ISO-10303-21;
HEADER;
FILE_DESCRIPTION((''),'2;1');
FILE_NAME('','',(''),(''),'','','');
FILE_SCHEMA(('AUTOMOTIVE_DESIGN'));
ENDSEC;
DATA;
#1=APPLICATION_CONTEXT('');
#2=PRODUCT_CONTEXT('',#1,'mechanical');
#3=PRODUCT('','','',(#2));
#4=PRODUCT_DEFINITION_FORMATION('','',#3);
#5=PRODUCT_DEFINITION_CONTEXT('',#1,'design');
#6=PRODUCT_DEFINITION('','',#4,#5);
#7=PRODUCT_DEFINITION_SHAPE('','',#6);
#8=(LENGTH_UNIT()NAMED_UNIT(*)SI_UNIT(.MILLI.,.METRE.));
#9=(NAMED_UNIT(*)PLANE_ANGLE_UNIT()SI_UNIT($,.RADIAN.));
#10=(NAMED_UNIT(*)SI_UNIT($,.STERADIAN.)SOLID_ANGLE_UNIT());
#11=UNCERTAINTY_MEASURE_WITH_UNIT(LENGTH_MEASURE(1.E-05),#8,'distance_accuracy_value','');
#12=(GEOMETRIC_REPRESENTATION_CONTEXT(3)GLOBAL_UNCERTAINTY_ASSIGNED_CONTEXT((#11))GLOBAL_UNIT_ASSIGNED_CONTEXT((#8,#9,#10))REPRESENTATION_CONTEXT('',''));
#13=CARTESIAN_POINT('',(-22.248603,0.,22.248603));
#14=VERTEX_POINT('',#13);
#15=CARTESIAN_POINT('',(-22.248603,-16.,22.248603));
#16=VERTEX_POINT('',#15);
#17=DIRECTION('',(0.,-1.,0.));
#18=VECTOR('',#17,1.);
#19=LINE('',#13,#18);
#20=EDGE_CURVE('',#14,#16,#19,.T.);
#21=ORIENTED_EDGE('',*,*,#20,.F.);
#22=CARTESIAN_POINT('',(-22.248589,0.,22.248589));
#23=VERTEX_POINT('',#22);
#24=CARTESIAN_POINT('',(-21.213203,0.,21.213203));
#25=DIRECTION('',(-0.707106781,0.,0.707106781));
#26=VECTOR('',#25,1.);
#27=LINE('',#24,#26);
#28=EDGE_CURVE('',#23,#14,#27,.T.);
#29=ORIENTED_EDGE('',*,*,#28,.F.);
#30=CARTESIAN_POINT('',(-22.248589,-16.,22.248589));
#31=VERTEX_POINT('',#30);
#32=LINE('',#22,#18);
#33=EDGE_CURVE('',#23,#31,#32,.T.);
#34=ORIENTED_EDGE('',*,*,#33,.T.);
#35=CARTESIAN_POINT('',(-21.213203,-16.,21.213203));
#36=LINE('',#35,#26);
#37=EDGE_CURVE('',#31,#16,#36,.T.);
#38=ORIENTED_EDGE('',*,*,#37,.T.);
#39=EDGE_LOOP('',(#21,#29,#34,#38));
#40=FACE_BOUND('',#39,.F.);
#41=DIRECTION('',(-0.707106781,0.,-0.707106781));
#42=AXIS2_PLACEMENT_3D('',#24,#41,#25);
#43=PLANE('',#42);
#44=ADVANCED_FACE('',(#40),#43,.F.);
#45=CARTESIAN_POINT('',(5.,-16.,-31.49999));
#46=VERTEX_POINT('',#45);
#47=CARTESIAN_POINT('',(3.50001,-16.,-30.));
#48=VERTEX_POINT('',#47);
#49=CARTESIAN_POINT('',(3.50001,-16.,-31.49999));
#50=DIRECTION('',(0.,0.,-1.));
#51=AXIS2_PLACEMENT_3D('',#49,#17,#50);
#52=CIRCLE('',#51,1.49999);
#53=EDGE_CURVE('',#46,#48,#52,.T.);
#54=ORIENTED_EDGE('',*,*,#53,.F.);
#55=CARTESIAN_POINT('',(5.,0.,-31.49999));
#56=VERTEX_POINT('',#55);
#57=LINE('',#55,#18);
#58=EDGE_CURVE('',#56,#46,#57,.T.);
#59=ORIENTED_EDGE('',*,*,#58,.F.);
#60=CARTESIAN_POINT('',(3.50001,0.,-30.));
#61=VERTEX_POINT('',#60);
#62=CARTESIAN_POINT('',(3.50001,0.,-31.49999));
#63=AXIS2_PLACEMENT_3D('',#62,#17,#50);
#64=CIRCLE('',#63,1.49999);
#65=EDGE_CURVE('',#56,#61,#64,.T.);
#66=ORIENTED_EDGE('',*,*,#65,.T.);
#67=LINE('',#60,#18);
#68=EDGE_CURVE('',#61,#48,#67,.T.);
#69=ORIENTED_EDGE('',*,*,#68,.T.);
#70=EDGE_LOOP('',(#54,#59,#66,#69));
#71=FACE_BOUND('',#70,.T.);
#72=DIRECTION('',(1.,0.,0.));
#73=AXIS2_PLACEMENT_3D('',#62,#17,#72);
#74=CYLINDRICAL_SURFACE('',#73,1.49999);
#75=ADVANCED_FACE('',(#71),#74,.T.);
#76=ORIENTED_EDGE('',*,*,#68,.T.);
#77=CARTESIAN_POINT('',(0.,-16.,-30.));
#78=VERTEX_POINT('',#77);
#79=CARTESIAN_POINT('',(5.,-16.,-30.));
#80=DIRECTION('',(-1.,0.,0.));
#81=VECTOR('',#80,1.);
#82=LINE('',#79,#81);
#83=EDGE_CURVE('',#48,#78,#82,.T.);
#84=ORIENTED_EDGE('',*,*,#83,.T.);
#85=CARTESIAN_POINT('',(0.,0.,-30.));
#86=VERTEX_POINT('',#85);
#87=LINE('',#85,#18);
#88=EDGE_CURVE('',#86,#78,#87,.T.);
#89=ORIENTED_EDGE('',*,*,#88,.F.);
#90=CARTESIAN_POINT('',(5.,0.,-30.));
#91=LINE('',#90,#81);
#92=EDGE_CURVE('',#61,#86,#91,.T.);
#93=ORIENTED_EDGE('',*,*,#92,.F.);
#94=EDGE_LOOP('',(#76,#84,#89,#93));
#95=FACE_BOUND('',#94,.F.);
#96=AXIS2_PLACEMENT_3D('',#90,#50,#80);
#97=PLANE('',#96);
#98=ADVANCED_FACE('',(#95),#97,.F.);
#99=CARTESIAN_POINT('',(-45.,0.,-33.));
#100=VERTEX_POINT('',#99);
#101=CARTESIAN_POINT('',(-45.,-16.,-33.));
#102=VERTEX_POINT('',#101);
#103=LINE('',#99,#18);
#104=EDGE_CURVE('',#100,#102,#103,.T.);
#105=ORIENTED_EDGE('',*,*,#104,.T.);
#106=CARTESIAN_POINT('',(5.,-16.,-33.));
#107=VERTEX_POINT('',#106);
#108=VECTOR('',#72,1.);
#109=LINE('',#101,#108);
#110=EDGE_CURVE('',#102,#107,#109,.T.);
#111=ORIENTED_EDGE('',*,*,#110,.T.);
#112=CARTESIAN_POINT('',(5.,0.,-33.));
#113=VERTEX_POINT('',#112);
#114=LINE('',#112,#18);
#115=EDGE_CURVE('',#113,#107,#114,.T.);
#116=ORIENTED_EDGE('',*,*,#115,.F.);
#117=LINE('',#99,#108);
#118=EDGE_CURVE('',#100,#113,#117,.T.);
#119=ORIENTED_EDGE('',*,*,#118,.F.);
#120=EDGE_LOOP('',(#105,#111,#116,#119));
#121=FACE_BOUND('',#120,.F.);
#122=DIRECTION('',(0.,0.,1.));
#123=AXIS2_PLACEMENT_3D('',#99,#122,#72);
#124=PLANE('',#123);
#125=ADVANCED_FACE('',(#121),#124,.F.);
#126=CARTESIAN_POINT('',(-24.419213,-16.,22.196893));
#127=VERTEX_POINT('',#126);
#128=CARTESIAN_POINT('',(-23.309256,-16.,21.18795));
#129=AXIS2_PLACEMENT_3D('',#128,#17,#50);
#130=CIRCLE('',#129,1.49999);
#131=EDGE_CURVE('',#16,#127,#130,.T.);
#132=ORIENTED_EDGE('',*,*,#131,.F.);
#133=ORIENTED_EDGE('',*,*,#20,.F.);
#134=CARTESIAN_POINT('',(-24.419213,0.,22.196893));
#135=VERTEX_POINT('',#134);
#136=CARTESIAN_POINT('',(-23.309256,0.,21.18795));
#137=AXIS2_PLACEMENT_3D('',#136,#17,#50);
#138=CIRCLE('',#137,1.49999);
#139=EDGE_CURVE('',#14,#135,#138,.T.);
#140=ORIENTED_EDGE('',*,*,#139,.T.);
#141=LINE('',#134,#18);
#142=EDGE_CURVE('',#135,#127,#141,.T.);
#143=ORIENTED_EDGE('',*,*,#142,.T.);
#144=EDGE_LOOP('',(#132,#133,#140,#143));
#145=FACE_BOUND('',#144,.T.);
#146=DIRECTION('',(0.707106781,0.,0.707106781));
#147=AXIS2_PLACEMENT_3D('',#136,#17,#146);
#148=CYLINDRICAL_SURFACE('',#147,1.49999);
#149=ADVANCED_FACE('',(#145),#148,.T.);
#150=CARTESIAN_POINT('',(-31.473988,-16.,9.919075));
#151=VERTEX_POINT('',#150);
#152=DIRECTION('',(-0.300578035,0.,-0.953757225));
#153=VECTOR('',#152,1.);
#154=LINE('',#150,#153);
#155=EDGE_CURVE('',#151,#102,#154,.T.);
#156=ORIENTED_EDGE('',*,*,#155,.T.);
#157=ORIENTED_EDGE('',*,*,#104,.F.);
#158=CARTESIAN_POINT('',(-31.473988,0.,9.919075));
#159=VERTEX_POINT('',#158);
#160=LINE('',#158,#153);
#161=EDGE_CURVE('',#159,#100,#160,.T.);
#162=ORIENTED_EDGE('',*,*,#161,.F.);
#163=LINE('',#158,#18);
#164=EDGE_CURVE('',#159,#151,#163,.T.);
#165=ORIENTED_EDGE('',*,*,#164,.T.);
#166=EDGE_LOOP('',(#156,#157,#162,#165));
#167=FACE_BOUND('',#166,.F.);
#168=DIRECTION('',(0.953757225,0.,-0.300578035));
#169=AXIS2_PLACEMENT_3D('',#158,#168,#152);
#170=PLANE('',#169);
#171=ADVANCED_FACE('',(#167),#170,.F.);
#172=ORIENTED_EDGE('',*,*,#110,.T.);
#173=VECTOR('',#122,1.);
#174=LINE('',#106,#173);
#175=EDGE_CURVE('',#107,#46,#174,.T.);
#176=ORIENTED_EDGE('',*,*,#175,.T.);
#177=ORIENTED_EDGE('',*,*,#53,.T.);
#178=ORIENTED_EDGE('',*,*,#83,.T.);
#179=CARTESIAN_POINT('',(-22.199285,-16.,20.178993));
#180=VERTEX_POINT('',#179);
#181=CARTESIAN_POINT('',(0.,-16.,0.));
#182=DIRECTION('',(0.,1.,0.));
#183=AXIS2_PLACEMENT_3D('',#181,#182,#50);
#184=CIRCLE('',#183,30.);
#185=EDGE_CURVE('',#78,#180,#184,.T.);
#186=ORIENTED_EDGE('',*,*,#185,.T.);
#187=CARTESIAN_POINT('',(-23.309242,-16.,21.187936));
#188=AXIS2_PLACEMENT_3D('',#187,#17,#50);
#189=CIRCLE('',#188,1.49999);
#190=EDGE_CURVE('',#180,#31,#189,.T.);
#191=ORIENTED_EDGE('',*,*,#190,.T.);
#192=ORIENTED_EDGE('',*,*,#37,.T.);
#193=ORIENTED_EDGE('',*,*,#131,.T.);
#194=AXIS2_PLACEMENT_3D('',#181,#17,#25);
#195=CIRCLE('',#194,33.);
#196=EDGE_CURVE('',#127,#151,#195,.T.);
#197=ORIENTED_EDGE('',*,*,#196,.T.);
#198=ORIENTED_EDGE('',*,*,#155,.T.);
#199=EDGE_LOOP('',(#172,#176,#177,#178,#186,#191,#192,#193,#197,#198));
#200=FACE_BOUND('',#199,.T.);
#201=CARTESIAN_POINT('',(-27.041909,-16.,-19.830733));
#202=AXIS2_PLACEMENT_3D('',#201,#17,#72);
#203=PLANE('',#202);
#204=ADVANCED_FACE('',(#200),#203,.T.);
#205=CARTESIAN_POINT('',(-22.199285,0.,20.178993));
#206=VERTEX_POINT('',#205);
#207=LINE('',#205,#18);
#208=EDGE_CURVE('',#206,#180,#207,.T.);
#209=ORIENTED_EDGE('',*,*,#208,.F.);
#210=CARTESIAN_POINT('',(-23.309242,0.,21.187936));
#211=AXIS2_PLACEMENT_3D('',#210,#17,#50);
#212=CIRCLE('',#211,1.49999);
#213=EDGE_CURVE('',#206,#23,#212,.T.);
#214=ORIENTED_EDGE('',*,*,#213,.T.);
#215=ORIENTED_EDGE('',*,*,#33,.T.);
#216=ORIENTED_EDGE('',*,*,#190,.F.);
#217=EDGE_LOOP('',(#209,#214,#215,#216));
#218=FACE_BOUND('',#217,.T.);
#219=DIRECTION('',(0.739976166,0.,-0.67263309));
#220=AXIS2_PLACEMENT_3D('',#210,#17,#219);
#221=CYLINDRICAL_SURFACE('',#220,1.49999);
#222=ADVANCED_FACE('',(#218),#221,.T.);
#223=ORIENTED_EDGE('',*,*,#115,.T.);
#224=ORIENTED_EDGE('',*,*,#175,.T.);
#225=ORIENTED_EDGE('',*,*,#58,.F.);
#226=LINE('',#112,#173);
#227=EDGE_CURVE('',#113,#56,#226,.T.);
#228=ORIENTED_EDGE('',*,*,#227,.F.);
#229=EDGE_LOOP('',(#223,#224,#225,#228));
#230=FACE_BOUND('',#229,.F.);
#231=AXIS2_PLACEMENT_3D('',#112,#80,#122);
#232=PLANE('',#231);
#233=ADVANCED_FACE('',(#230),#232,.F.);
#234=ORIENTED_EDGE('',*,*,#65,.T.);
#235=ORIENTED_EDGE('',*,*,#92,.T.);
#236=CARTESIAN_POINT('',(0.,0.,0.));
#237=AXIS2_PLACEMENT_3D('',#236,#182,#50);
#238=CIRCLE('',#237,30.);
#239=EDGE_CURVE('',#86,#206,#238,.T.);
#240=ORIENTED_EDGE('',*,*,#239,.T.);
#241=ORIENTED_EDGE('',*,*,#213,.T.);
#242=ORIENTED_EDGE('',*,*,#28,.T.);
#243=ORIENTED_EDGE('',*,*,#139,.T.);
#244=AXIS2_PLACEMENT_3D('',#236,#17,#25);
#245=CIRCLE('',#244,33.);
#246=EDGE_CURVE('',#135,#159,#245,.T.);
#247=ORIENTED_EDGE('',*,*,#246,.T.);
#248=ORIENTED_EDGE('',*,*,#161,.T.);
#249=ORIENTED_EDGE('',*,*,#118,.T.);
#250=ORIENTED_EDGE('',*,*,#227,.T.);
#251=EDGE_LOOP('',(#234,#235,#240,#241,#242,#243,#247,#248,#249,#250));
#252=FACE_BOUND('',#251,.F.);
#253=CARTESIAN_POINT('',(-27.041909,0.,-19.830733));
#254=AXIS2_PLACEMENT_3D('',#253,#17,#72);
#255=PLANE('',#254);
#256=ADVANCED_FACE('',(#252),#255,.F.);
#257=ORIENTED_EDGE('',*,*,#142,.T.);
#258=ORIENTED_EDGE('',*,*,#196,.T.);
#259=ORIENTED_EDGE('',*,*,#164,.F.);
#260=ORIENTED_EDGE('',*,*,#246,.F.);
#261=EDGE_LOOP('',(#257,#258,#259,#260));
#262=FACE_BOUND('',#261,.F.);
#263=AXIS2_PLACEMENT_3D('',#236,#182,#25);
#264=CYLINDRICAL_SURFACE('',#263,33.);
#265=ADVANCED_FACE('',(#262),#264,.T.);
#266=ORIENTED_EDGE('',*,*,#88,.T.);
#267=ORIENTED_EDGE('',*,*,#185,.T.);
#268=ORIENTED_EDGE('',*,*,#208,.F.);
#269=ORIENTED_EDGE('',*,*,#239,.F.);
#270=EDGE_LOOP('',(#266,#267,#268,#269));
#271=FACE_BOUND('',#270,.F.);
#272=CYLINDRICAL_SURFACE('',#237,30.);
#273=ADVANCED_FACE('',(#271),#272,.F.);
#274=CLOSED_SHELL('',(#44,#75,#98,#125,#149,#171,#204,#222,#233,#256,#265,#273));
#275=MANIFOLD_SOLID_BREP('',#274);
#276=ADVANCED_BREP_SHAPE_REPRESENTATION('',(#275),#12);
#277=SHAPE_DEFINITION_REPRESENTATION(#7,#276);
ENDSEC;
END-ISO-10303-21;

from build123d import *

# Parameters (mm, degrees)
F1_DEPTH = 16
F2_R     = 1.49999


# Not quite as in the source:
# - a fillet or chamfer is up to 0.001 mm smaller than in the source, because OpenCascade refuses the exact size


with BuildPart() as f1:
    # F0 (on Front) → F1 (new body)
    with BuildSketch(Plane.XZ):
        with BuildLine():
            ThreePointArc((0, -33), (-26.6113648632, -19.5150008997), (-31.4739884393, 9.9190751445))
            Line((-31.4739884393, 9.9190751445), (-45, -33))
            Line((-45, -33), (0, -33))
        make_face()
        with BuildLine():
            Line((5, -30), (0, -30))
            ThreePointArc((0, -30), (-27.7163859753, -11.480502971), (-21.2132034356, 21.2132034356))
            Line((-21.2132034356, 21.2132034356), (-23.3345237792, 23.3345237792))
            ThreePointArc((-23.3345237792, 23.3345237792), (-28.213238354, 17.1176278024), (-31.4739884393, 9.9190751445))
            ThreePointArc((-31.4739884393, 9.9190751445), (-26.6113648632, -19.5150008997), (0, -33))
            ThreePointArc((0, -33), (2.5072470561, -32.9046153632), (5, -32.6190128606))
            Line((5, -32.6190128606), (5, -30))
        make_face()
        with BuildLine():
            Line((5, -33), (5, -32.6190128606))
            ThreePointArc((5, -32.6190128606), (2.5072470561, -32.9046153632), (0, -33))
            Line((0, -33), (5, -33))
        make_face()
    extrude(amount=F1_DEPTH)

    # F2 (radius 1.5 in the source; OpenCascade refuses exactly that, so slightly less here)
    f2_edges = [f1.edges().sort_by_distance(p)[0] for p in [
        (-21.213203, -8, 21.213203),
        (-23.334524, -8, 23.334524),
        (5, -8, -30),
    ]]
    fillet(f2_edges, radius=F2_R)


solid = f1.part
